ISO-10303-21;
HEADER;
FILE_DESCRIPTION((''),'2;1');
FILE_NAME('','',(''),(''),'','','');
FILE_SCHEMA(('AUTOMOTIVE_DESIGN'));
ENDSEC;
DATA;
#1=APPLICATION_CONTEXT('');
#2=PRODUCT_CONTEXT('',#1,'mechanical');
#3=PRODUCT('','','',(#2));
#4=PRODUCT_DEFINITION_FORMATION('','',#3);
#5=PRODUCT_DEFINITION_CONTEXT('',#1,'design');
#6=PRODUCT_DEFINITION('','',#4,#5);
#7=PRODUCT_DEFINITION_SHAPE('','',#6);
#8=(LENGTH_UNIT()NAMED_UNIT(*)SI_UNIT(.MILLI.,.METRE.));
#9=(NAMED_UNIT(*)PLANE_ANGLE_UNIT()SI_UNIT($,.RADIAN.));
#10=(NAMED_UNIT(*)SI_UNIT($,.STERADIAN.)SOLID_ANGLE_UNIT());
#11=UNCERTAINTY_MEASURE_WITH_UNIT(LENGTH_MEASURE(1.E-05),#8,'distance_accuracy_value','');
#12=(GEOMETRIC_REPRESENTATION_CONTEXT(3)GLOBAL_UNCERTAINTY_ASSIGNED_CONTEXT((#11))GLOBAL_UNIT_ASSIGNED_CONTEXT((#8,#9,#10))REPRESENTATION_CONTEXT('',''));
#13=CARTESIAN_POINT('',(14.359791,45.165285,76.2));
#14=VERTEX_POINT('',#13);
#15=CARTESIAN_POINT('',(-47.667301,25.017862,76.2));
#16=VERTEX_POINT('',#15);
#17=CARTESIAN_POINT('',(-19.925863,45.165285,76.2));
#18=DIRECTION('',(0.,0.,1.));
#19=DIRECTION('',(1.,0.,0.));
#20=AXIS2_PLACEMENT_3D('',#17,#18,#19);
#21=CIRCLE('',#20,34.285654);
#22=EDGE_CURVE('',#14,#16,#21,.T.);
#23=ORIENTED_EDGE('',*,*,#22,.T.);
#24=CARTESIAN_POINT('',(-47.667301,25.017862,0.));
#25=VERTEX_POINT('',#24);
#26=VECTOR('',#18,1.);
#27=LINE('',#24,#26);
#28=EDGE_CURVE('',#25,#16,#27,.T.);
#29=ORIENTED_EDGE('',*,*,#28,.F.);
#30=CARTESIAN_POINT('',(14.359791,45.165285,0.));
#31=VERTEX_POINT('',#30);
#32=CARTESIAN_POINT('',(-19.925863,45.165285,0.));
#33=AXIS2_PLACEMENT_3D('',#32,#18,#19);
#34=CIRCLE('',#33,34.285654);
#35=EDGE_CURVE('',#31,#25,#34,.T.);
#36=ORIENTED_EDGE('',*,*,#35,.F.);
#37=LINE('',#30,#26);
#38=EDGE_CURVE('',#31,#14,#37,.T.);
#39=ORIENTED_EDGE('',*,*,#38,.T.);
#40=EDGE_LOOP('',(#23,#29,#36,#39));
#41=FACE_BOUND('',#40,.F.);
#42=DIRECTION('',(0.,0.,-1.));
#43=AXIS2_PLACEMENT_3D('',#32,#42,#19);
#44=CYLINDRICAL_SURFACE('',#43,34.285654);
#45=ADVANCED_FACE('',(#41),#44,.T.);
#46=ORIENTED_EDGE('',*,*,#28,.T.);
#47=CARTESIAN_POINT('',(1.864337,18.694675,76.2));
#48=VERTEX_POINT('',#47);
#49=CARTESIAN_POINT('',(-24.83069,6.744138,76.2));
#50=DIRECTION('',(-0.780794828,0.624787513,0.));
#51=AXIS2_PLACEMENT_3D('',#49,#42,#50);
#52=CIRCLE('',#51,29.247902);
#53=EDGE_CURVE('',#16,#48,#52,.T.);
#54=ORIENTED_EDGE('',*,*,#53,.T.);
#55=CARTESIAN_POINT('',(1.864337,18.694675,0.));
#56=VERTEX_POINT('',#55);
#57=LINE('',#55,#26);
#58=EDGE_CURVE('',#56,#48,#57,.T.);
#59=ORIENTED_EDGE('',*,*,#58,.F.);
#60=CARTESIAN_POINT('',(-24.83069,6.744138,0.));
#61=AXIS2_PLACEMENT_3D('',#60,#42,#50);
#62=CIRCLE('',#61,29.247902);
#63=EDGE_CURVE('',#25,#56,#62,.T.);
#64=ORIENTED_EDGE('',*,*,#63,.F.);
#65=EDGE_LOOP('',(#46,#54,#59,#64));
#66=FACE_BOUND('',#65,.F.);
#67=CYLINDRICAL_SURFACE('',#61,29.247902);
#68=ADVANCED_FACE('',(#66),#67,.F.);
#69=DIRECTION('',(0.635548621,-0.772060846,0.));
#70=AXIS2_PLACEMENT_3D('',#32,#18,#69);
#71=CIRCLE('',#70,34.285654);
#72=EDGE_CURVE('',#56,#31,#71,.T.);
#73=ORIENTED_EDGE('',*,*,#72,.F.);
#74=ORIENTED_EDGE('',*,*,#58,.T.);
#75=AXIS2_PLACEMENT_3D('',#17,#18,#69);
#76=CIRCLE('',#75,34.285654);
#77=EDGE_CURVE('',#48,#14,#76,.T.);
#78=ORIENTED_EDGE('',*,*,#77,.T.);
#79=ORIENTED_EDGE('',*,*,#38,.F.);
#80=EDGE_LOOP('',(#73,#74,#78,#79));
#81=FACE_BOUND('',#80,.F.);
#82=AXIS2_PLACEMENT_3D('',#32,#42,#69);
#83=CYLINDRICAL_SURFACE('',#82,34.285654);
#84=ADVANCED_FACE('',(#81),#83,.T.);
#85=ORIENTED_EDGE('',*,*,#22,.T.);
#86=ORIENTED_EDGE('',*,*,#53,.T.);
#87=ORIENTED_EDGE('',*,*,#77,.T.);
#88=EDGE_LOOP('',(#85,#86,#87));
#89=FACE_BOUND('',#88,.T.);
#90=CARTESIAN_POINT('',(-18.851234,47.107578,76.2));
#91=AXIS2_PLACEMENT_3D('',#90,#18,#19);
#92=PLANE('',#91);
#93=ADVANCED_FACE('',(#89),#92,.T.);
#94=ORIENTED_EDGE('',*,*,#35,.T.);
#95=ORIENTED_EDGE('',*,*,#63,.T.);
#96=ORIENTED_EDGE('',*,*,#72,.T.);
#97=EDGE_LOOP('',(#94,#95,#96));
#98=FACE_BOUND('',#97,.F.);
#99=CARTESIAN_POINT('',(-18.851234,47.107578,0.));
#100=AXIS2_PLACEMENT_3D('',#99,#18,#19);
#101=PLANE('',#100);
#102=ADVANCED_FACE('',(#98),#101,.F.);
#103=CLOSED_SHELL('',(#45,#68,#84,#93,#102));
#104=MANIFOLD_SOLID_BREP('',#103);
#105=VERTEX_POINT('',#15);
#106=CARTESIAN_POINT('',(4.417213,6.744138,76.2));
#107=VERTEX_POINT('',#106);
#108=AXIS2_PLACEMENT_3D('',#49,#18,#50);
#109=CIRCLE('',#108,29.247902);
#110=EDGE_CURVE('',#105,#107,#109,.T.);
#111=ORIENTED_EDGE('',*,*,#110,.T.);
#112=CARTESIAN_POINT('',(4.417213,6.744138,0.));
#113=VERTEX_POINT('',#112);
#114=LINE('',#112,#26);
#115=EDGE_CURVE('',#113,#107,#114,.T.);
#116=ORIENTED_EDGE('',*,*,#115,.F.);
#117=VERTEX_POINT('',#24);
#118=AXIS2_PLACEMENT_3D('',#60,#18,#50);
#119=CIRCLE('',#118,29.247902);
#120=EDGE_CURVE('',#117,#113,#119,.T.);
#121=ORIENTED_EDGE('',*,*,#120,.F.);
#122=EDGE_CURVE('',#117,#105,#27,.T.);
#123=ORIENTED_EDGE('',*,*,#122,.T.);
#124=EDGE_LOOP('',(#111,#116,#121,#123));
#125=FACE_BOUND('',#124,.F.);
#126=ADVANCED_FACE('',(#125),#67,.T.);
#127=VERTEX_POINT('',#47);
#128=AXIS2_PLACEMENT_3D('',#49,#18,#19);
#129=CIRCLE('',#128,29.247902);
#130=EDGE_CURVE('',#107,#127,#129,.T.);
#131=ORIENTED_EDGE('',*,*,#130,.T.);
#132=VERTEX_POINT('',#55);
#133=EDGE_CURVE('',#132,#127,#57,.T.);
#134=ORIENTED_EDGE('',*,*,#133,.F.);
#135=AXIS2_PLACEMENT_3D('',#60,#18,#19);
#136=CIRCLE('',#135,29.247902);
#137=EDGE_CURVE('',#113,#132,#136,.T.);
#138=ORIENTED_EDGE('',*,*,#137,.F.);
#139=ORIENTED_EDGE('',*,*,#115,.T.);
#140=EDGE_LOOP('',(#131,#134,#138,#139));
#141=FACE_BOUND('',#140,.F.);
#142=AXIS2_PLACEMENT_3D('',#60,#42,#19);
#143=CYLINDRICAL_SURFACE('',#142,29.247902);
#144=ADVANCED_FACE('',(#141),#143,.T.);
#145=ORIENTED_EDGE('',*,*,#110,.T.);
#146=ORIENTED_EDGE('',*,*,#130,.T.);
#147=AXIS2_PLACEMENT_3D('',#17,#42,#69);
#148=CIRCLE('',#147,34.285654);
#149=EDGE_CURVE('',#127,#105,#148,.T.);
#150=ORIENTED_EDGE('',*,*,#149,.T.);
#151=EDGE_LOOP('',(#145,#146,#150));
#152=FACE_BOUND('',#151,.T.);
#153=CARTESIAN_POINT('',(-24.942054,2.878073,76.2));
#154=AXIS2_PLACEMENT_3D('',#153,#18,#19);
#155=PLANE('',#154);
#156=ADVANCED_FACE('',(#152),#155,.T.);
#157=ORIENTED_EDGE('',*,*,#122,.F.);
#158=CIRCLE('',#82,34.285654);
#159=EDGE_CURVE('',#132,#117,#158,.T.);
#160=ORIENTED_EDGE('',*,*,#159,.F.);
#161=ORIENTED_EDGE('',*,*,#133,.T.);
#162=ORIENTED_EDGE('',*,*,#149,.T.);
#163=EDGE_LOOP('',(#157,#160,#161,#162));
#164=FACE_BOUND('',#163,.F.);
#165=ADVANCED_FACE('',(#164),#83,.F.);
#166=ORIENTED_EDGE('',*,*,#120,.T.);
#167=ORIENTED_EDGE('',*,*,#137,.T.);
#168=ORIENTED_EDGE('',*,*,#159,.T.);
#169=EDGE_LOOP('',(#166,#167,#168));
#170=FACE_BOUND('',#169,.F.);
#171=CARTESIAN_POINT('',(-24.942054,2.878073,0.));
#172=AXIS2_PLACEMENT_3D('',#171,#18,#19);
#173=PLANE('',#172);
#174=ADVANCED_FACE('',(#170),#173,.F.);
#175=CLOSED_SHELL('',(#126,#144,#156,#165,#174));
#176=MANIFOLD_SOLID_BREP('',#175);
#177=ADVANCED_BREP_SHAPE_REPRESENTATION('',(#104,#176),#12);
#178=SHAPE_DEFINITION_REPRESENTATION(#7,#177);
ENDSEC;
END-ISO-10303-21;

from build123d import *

# Parameters (mm, degrees)
F1_DEPTH = 76.2


with BuildPart() as f1:
    # F0 (on Top) → F1 (new body)
    with BuildSketch(Plane.XY):
        with BuildLine():
            ThreePointArc((1.8643373855, 18.6946746403), (11.0789540131, 30.5294595365), (14.3597911671, 45.1652854681))
            ThreePointArc((14.3597911671, 45.1652854681), (-30.5176686365, 77.7738686127), (-47.6673005986, 25.0178621615))
            ThreePointArc((-47.6673005986, 25.0178621615), (-21.1269727644, 35.7565883383), (1.8643373855, 18.6946746403))
        make_face()
    extrude(amount=F1_DEPTH)


with BuildPart() as f1b:
    # F0 (on Top) → F1, piece 2 (new body)
    with BuildSketch(Plane.XY):
        with BuildLine():
            ThreePointArc((1.8643373855, 18.6946746403), (-24.2675193626, 11.1556387927), (-47.6673005986, 25.0178621615))
            ThreePointArc((-47.6673005986, 25.0178621615), (-34.5135824843, -20.8544377569), (4.4172127574, 6.7441379651))
            ThreePointArc((4.4172127574, 6.7441379651), (3.7718744023, 12.854221833), (1.8643373855, 18.6946746403))
        make_face()
    extrude(amount=F1_DEPTH)


solid = Compound([f1.part, f1b.part])
